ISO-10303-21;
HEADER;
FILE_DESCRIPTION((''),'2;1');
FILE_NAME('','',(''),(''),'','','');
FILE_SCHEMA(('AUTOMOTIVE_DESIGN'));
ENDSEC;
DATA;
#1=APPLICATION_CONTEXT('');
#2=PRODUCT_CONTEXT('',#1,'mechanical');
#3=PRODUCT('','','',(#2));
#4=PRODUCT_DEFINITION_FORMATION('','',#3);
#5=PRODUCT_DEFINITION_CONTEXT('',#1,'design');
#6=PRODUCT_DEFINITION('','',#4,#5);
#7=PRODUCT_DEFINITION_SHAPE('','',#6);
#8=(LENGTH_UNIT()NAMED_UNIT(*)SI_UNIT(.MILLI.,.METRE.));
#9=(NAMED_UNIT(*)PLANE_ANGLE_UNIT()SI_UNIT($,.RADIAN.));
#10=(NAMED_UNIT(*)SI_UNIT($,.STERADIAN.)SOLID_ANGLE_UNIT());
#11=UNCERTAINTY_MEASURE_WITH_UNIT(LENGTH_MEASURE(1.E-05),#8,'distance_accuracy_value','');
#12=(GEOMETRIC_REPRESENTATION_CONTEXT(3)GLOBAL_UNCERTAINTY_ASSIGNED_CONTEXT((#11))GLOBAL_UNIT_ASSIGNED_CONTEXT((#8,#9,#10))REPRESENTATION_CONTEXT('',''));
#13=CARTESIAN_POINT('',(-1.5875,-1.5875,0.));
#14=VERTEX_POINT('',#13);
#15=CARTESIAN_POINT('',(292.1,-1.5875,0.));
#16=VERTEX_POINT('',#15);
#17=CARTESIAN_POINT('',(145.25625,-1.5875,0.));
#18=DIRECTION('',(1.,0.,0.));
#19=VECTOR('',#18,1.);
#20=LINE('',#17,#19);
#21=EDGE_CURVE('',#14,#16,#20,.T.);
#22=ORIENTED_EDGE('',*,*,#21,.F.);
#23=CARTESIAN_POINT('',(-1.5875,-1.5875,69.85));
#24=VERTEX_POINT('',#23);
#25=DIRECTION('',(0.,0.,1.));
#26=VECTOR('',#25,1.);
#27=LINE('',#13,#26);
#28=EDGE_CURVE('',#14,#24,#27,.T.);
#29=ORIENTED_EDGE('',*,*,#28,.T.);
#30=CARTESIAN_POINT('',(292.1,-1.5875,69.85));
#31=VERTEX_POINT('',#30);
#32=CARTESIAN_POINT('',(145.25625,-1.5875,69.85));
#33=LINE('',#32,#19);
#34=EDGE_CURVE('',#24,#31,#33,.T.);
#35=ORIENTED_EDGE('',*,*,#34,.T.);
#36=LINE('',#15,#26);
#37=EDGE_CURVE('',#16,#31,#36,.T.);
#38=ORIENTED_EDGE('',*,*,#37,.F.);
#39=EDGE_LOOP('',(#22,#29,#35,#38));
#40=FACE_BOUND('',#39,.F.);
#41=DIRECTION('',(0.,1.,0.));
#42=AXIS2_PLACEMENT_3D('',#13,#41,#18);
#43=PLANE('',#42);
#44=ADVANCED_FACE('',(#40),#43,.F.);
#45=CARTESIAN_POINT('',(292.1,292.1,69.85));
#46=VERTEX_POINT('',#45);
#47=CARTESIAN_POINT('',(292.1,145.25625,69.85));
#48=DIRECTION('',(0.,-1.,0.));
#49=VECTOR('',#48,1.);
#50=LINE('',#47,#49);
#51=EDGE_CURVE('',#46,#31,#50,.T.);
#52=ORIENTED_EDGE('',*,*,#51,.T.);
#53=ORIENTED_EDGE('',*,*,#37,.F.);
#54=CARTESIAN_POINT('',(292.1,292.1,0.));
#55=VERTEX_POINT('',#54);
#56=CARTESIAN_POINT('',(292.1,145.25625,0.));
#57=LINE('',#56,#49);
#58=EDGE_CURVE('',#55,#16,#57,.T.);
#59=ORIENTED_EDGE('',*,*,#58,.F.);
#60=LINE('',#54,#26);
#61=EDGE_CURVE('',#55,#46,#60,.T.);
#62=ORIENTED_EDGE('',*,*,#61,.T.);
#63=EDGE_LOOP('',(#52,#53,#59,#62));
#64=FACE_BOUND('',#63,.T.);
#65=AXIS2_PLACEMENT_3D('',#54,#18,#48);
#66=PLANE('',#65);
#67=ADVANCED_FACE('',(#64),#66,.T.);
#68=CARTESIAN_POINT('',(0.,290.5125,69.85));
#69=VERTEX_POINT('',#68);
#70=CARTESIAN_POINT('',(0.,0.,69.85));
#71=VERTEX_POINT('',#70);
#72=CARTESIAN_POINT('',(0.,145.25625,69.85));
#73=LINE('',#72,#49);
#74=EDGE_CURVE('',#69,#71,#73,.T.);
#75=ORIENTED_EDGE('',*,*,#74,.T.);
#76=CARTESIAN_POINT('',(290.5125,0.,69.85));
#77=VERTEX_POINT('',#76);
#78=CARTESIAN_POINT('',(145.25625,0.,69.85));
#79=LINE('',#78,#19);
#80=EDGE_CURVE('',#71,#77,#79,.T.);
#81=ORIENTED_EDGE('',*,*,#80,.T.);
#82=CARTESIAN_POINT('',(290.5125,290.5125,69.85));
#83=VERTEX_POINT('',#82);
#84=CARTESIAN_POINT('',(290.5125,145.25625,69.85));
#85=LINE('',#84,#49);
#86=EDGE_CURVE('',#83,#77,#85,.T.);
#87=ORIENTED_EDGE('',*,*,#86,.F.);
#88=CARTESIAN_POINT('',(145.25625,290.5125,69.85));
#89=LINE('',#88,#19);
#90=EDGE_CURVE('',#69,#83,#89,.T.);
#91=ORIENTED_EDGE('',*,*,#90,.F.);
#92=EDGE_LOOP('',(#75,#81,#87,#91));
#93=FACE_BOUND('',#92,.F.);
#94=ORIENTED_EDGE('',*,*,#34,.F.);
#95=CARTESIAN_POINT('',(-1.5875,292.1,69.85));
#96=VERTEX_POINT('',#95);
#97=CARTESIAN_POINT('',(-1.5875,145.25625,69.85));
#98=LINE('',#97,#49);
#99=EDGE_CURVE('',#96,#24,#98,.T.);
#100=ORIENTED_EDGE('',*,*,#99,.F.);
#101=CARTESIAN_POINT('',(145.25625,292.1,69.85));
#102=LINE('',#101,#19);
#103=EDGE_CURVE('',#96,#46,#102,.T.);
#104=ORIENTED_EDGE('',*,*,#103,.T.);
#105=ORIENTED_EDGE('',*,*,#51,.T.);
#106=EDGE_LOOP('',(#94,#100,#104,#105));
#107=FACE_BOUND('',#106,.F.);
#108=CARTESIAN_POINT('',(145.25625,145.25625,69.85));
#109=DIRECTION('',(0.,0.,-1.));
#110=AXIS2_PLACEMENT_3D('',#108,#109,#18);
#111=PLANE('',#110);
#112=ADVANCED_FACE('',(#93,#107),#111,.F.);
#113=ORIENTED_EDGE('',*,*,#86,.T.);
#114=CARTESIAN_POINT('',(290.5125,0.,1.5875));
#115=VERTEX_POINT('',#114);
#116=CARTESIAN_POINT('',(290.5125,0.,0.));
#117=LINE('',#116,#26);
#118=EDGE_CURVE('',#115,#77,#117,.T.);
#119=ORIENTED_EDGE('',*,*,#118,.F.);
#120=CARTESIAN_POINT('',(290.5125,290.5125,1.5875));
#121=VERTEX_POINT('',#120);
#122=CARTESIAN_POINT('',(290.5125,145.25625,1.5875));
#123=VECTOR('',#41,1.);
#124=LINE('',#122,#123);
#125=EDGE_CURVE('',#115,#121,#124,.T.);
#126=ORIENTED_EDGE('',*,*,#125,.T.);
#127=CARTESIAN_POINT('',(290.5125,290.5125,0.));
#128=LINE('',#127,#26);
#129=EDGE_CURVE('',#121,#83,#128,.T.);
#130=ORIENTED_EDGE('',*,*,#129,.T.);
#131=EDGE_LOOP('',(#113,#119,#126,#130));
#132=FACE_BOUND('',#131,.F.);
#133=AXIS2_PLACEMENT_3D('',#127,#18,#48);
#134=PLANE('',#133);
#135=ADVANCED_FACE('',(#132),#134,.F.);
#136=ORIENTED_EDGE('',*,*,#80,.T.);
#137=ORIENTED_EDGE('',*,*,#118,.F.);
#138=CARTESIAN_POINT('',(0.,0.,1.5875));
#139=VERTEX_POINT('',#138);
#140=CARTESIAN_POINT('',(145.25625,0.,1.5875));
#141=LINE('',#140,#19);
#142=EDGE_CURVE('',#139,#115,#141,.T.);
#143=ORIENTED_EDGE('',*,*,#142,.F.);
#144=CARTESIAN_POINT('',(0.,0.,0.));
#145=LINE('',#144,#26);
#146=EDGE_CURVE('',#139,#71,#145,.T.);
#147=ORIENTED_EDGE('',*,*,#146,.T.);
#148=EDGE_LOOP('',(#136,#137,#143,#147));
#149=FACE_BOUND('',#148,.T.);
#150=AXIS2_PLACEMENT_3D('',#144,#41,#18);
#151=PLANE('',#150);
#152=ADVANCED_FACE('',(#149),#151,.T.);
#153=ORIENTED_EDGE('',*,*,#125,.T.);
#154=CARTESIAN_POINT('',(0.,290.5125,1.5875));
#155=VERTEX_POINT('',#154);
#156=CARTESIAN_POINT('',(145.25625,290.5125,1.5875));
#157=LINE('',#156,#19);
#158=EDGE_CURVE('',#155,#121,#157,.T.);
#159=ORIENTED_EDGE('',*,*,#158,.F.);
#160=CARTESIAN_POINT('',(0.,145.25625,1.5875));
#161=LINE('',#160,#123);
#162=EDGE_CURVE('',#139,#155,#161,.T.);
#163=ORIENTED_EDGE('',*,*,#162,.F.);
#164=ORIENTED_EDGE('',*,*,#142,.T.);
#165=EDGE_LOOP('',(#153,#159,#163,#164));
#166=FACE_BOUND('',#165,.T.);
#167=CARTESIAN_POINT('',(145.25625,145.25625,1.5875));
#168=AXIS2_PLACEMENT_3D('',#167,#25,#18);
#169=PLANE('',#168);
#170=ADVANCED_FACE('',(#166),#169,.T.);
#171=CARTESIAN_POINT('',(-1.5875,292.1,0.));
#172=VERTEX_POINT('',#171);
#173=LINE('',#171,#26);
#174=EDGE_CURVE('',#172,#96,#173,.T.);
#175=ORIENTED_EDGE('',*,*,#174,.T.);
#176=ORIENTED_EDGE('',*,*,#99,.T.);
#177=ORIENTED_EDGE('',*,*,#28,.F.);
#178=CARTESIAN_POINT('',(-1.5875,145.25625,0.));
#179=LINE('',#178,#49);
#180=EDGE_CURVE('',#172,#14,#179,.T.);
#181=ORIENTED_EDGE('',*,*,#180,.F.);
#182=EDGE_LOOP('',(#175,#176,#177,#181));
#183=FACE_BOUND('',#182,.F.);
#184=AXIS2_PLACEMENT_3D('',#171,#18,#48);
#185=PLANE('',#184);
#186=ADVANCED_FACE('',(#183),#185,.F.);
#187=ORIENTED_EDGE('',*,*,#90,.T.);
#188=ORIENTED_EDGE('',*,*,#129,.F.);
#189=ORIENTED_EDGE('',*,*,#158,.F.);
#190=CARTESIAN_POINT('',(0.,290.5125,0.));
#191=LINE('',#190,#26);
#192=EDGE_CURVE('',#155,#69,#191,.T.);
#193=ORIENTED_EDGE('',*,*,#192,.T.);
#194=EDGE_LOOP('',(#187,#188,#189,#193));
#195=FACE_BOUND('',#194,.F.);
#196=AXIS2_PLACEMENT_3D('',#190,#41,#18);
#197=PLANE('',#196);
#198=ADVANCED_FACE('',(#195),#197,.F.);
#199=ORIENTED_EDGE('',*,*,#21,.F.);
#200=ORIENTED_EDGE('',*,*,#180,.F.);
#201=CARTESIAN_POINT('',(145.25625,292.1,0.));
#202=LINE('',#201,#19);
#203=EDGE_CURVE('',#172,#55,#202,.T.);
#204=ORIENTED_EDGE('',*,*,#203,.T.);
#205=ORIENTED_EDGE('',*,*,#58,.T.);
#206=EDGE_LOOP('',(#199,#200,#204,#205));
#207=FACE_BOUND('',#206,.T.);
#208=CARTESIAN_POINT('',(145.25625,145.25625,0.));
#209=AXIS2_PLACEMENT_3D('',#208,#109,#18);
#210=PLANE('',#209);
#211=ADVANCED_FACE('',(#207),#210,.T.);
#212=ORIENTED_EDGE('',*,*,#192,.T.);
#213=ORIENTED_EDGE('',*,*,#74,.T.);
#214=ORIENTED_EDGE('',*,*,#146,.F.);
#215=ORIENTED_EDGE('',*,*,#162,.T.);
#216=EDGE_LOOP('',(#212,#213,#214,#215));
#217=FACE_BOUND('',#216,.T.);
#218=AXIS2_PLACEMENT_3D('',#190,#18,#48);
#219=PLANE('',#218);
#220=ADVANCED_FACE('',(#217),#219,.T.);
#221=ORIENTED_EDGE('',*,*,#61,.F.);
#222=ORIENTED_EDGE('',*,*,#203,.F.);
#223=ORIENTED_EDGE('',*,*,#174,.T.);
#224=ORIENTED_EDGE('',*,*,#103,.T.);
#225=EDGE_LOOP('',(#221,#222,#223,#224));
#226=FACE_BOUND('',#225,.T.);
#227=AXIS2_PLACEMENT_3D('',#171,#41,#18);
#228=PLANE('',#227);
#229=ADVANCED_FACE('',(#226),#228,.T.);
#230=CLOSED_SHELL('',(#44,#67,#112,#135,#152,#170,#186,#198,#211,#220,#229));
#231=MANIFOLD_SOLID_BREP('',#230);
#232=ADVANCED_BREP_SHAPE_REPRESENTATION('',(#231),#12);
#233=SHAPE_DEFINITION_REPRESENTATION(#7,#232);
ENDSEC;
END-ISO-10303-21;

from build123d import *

# Parameters (mm, degrees)
F0_W     = 290.5125
F0_H     = 290.5125
F1_DEPTH = 1.5875
F2_W     = 293.6875
F2_H     = 293.6875
F2_W_2   = 290.5125
F2_H_2   = 290.5125
F3_DEPTH = 69.85


# Not quite as in the source:
# - a length typed as a fraction of an inch, garbled in the dataset ("3 / 203.2 mm" for 3/8 in), is restored


with BuildPart() as f1:
    # F0 (on Top) → F1 (new body)
    with BuildSketch(Plane.XY):
        with Locations((145.25625, 145.25625)):
            Rectangle(F0_W, F0_H)
    extrude(amount=F1_DEPTH)

    # F2 (on face) → F3 (join)
    with BuildSketch(Plane(origin=(0, 0, 0), x_dir=(1, 0, 0), z_dir=(0, 0, -1))):
        with Locations((145.25625, -145.25625)):
            Rectangle(F2_W, F2_H)
        with Locations((145.25625, -145.25625)):
            Rectangle(F2_W_2, F2_H_2, mode=Mode.SUBTRACT)
    extrude(amount=-F3_DEPTH)


solid = f1.part
